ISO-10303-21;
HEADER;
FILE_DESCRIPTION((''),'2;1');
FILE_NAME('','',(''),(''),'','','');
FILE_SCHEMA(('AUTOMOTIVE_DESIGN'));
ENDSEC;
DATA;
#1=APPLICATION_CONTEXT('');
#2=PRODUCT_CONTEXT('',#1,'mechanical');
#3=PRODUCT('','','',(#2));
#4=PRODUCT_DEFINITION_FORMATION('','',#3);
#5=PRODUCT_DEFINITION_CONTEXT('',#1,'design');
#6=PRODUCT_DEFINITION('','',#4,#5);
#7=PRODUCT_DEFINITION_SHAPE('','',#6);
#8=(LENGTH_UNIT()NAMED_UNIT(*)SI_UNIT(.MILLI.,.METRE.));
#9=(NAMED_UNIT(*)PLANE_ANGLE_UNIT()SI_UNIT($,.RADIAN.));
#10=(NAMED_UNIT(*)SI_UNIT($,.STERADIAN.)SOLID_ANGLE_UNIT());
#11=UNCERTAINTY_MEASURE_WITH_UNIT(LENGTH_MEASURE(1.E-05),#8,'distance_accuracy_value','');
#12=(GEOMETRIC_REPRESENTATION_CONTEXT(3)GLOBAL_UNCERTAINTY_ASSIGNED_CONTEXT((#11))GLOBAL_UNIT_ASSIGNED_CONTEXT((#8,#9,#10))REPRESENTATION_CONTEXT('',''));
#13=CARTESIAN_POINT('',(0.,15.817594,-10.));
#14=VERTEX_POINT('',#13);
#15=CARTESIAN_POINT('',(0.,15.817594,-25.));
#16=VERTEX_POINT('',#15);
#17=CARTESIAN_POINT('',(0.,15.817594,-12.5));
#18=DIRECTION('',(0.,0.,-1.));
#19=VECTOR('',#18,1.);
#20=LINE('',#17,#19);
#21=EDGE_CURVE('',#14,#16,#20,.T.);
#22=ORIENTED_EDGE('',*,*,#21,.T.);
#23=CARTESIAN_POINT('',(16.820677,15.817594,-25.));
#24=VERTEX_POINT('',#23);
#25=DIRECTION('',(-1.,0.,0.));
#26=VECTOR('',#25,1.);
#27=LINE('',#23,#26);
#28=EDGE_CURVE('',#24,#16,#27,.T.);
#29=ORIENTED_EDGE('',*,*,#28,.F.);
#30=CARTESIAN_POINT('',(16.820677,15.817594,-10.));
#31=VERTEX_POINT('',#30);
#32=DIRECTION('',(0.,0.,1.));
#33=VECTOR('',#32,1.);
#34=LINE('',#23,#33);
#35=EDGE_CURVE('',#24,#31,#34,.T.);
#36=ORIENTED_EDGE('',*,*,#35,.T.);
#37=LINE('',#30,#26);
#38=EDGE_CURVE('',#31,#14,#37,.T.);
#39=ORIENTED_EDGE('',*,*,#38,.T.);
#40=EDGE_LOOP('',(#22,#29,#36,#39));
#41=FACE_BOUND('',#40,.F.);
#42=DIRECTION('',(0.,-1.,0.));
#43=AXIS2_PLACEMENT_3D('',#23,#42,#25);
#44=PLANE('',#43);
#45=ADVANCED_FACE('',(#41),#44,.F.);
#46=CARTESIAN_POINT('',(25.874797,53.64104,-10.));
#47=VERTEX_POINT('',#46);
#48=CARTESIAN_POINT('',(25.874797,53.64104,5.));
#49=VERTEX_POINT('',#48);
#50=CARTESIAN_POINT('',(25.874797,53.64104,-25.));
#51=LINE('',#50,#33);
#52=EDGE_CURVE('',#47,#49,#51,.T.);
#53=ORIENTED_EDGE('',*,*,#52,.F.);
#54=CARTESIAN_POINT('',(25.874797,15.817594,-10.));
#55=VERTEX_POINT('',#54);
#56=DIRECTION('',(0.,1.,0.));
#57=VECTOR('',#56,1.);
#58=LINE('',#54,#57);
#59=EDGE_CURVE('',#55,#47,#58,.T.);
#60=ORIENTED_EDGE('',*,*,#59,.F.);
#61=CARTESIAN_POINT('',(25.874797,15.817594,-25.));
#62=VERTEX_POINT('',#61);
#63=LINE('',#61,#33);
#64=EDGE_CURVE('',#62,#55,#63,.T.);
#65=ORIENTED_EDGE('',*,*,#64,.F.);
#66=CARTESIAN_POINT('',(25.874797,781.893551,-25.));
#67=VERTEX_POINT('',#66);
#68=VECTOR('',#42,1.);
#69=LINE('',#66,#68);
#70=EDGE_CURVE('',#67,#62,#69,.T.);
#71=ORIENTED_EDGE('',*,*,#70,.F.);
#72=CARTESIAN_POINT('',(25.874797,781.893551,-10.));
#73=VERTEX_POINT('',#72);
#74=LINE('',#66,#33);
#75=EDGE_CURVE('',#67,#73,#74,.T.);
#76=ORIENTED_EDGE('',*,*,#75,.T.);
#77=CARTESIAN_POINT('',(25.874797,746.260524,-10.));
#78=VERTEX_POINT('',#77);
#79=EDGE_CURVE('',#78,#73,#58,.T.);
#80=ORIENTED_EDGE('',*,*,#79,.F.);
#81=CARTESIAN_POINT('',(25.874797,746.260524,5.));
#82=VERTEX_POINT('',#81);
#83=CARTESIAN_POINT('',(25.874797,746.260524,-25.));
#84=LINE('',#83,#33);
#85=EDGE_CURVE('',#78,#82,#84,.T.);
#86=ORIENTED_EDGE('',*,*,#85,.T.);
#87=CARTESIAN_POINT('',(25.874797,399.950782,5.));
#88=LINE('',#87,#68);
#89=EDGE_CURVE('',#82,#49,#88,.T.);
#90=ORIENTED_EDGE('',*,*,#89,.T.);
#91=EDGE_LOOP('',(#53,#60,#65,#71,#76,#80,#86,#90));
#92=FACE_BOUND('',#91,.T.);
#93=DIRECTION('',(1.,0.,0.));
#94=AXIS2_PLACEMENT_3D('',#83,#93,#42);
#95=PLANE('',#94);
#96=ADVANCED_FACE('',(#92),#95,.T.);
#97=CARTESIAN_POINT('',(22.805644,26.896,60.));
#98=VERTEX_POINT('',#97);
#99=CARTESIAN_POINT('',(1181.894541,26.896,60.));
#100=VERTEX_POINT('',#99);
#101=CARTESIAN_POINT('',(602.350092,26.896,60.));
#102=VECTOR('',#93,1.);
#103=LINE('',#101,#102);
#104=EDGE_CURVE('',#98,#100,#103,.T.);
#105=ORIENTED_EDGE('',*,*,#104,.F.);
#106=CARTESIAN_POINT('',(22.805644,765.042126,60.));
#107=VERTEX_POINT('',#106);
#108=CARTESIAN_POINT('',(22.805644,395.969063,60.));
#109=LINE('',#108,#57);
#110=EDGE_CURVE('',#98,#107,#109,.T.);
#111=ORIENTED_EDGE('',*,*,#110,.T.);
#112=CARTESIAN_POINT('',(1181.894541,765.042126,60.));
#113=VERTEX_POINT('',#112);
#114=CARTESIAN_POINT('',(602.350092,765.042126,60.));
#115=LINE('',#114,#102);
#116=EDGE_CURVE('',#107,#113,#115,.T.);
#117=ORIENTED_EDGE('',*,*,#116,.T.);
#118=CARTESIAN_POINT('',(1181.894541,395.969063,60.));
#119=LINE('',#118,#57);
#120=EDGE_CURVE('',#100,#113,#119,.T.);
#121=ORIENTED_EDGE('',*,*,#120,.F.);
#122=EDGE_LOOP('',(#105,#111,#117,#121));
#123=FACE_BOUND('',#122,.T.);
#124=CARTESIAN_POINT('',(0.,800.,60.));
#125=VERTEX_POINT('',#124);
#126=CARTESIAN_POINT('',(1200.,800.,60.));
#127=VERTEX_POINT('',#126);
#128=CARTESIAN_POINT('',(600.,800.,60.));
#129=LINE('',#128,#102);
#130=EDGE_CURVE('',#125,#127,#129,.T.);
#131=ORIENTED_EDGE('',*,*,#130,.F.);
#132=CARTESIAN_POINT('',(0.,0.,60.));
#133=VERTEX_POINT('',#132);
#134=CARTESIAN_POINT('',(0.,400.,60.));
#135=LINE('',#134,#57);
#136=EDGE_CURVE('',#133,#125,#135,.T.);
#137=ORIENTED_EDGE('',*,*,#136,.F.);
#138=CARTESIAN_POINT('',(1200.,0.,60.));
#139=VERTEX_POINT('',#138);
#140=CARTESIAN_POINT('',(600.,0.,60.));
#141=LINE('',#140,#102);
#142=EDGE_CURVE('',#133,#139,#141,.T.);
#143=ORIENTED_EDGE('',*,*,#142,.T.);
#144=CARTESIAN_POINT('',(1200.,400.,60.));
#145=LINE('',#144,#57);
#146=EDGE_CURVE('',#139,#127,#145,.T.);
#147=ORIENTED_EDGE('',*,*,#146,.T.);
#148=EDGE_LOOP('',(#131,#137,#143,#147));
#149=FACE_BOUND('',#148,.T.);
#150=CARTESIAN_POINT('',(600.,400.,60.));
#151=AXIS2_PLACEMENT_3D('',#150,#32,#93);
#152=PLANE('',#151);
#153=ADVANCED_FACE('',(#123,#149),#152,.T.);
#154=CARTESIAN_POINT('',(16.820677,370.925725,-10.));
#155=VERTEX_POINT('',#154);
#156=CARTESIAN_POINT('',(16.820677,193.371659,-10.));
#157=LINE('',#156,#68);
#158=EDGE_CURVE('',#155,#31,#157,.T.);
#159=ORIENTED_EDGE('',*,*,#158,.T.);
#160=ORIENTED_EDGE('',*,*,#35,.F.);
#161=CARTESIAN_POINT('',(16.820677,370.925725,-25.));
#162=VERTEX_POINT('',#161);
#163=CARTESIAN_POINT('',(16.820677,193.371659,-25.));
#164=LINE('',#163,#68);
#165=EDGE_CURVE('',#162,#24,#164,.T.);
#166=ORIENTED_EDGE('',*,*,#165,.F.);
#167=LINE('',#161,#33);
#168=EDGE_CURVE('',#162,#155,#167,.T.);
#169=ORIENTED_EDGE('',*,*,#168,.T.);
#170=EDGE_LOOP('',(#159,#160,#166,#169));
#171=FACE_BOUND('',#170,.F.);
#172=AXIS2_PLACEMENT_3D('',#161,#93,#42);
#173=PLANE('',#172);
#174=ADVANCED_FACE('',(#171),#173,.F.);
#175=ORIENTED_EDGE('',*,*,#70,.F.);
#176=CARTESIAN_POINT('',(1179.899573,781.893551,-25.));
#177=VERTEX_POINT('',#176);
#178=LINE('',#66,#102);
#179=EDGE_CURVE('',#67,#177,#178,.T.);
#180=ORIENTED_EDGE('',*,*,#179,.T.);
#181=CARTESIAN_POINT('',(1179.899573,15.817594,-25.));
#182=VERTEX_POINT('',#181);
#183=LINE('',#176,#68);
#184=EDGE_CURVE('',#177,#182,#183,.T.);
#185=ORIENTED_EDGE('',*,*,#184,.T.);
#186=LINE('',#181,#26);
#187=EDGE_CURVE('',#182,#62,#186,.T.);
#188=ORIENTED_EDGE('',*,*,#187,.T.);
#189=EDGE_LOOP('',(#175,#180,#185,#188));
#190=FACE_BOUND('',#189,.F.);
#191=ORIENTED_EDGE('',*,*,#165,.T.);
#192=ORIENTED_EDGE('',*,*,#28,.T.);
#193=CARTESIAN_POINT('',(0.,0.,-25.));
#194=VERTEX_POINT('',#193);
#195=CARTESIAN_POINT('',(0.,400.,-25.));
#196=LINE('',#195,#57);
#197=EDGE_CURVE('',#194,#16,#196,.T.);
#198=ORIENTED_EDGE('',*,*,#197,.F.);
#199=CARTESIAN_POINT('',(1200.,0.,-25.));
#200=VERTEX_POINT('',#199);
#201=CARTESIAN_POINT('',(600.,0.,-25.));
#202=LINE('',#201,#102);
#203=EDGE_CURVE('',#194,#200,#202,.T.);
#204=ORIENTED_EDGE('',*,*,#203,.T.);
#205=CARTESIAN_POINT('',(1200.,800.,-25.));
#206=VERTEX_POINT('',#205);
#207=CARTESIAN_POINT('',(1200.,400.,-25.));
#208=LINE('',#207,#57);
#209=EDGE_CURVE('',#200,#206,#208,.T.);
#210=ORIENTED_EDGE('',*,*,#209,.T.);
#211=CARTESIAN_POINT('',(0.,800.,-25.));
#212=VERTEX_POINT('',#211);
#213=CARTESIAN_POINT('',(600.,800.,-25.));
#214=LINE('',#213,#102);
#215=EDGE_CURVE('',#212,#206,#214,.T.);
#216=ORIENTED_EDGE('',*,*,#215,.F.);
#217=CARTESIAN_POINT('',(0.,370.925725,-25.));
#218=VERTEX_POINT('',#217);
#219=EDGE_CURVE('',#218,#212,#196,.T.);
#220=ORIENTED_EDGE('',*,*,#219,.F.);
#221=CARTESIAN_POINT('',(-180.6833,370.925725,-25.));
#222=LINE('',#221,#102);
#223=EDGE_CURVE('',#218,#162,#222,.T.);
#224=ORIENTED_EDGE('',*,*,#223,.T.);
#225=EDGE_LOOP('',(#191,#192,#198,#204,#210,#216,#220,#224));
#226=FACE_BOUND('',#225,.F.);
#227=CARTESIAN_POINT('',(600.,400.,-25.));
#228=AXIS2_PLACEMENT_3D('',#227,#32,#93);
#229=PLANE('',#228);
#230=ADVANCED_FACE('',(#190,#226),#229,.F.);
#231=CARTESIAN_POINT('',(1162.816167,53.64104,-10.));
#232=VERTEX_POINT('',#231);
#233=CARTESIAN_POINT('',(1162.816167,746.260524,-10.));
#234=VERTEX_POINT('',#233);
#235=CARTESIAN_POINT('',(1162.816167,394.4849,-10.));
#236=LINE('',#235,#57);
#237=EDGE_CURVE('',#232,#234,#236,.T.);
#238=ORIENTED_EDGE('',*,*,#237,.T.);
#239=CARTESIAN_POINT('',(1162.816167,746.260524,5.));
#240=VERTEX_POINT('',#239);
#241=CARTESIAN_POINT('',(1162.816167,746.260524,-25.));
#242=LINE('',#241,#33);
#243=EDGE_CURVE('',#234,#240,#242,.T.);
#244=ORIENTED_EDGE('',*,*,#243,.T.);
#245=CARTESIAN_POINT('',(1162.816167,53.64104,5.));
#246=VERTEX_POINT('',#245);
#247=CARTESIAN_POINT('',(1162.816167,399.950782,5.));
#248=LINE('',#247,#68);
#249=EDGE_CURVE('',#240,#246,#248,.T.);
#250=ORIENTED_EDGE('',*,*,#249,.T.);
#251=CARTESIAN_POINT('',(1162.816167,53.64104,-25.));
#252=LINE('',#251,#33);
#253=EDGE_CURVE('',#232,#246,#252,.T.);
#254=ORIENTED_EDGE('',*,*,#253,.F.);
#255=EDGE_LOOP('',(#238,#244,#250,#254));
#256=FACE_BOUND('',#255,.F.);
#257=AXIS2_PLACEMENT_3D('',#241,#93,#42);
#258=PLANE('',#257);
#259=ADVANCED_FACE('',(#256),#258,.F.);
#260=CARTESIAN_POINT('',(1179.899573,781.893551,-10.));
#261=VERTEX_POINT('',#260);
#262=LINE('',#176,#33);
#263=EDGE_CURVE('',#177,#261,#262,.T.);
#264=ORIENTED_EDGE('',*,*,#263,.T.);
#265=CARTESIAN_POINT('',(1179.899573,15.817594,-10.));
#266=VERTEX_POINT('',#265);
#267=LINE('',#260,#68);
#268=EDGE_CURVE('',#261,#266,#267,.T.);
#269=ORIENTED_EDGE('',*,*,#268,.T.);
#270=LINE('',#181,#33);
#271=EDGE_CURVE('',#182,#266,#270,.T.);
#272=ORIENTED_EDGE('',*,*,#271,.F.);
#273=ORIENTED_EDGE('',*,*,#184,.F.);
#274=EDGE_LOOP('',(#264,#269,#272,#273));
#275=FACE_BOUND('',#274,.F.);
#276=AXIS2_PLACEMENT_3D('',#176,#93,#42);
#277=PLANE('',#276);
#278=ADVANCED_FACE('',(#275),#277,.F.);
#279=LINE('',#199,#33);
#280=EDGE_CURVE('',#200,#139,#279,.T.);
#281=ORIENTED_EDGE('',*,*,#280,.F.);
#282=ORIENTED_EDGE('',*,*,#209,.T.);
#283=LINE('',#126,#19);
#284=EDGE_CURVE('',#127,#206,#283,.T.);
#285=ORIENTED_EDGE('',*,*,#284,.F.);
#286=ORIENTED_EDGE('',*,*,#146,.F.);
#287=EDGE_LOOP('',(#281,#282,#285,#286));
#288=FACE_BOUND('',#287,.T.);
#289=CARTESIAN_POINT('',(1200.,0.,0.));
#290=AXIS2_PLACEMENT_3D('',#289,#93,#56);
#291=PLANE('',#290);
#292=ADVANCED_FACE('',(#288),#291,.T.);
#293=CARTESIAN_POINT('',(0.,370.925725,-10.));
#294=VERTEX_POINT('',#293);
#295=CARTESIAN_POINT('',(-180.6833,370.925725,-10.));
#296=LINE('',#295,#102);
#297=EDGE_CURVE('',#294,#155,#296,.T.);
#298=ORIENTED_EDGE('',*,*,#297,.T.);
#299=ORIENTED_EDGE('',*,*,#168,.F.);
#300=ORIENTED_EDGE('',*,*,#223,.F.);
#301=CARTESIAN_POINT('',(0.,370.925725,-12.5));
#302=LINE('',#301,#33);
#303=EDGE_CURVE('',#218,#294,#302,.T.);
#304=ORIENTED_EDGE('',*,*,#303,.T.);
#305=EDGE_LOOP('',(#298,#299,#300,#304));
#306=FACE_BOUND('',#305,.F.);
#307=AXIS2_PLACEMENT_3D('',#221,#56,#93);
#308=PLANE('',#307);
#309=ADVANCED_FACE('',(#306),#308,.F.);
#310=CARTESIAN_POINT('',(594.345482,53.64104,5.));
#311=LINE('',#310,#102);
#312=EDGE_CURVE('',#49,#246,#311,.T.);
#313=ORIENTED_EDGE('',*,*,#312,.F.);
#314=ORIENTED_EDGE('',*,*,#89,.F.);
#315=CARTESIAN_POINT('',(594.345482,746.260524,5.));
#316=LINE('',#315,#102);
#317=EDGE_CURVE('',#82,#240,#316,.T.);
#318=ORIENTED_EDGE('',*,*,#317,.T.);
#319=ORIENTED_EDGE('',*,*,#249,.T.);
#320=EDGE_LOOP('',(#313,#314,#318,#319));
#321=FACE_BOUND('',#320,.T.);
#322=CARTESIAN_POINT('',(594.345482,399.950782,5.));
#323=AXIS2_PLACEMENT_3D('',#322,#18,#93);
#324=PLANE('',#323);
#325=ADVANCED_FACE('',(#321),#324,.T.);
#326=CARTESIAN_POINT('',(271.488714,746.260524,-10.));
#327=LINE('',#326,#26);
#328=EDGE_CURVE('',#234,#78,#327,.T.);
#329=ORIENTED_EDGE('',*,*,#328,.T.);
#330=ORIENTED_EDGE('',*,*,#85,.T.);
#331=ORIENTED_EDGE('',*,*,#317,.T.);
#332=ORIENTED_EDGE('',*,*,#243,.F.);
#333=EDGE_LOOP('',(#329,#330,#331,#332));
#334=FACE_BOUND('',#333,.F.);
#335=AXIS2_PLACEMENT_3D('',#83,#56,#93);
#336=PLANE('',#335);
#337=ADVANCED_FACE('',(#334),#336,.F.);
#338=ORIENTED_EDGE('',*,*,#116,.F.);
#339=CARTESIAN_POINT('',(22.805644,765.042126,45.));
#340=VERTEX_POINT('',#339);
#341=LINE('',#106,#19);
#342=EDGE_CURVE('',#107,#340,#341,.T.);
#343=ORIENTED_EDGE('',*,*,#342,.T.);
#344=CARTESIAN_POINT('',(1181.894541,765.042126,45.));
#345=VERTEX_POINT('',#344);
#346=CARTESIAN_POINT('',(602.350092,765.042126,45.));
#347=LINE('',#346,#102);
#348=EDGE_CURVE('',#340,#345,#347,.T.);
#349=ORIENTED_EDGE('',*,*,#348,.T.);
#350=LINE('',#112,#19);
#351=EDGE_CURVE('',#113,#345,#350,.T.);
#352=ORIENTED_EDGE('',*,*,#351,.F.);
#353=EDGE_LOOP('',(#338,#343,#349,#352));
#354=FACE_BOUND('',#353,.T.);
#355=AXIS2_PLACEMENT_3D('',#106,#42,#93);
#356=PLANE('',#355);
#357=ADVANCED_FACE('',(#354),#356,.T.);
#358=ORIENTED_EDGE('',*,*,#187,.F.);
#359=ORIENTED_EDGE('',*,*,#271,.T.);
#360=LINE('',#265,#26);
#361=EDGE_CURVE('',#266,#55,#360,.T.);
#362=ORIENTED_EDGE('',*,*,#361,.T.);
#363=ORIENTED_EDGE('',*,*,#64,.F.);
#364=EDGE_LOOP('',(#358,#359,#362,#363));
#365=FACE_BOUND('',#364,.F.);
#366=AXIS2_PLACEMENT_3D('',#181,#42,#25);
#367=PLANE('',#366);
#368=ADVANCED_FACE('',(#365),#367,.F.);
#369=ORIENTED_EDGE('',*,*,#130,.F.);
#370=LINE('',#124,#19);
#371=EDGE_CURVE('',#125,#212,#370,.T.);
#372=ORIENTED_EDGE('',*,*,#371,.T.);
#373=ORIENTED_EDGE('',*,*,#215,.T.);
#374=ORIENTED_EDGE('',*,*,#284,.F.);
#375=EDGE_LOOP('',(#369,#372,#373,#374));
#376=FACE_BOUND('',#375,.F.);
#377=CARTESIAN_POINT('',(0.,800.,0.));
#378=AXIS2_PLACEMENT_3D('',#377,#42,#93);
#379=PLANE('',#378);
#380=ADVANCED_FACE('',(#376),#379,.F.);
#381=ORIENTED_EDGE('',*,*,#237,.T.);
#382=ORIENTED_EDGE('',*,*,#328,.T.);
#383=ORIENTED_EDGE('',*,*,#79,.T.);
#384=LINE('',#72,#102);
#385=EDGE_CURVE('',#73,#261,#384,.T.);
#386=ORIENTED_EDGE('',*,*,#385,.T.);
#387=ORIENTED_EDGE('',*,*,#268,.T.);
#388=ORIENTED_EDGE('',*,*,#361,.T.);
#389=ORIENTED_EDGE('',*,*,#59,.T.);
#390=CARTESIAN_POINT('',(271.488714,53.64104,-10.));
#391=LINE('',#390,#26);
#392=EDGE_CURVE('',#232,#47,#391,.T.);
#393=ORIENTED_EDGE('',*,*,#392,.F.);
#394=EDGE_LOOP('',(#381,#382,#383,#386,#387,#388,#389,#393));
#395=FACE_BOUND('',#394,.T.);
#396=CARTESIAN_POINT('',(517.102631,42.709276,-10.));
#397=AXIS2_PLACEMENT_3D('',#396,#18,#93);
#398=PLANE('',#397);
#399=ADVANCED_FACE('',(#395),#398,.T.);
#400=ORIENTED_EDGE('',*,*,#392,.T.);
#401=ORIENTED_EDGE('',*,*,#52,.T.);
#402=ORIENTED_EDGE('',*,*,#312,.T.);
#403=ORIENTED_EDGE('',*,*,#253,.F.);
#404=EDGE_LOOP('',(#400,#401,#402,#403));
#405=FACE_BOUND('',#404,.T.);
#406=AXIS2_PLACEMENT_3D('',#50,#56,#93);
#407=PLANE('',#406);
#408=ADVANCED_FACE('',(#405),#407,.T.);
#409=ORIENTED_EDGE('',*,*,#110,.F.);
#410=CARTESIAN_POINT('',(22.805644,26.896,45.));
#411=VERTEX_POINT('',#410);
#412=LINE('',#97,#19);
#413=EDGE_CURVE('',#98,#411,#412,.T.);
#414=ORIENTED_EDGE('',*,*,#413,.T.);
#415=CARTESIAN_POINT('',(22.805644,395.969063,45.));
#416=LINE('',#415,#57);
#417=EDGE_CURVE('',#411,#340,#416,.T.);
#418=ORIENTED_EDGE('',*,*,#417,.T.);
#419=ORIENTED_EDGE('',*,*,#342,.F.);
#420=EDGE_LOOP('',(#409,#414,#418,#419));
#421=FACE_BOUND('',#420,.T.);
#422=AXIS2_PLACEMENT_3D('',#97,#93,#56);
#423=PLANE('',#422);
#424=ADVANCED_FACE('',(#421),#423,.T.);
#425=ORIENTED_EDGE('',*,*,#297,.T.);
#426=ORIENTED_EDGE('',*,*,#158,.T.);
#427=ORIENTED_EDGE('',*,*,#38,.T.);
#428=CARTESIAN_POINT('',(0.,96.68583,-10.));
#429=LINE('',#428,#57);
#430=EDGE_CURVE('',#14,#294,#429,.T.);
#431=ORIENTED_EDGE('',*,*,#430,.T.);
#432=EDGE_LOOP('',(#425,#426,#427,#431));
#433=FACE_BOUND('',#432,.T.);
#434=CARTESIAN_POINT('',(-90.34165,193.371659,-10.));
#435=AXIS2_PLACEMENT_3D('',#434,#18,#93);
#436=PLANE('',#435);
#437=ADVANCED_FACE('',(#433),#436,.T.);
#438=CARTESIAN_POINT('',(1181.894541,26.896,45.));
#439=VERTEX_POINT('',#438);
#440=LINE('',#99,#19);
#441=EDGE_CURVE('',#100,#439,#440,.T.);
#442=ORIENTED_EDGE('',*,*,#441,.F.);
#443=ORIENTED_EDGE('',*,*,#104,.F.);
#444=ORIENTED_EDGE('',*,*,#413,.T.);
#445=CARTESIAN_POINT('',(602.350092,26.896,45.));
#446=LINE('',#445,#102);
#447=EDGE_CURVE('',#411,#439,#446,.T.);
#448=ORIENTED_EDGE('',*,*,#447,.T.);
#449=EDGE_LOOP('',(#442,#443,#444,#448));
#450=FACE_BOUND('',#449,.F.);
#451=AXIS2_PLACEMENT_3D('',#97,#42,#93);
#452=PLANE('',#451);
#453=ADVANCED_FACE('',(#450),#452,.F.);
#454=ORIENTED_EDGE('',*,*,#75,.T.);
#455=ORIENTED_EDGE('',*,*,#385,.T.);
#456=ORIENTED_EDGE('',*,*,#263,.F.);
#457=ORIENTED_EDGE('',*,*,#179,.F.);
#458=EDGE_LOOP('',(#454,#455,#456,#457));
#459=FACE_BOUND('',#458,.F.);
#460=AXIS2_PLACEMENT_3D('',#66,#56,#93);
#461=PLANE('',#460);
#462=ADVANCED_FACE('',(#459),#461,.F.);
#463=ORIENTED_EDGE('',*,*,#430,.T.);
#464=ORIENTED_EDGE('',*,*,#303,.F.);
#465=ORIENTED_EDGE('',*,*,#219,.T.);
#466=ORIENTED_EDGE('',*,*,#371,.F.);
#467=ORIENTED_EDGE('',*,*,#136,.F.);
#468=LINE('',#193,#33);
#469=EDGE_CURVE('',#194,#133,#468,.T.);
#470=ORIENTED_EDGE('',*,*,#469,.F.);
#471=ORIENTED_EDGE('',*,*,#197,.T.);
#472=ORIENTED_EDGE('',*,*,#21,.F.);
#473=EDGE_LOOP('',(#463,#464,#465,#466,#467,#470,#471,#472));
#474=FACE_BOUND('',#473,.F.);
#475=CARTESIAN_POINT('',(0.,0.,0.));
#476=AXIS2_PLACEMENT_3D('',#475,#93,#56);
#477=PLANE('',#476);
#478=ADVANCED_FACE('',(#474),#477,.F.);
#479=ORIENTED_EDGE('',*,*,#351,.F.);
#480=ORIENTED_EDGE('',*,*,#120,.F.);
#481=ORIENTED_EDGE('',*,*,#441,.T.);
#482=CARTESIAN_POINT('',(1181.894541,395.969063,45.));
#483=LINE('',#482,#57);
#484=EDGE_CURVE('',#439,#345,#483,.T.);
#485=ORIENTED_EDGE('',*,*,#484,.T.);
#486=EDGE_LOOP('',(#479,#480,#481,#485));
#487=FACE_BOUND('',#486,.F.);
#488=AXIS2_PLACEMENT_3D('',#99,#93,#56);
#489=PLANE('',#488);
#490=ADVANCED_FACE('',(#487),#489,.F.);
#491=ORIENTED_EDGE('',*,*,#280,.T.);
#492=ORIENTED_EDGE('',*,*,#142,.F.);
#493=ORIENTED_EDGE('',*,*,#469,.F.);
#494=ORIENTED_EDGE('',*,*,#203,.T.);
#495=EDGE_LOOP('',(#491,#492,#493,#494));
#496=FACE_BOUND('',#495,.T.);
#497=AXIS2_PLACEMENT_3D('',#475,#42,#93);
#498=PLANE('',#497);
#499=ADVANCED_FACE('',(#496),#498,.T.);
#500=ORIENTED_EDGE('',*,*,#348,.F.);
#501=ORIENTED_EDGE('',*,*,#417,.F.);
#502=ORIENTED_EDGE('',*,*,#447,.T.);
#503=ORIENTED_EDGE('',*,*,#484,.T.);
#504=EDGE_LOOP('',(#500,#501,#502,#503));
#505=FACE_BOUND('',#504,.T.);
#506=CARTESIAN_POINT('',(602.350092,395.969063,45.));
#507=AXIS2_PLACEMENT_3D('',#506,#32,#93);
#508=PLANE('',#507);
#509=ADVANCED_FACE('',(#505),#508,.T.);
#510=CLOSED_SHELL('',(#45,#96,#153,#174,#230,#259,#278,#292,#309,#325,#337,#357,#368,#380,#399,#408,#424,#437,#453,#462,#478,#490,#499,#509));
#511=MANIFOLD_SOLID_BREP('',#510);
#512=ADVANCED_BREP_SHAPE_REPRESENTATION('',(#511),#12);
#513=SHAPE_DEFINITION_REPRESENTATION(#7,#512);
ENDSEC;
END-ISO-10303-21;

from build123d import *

# Parameters (mm, degrees)
F0_W      = 1200
F0_H      = 800
F1_DEPTH  = 60
F4_DEPTH  = 25
F5_W      = 1136.9413696229
F5_H      = 692.619483918
F6_DEPTH  = 30
F7_W      = 1159.0888965875
F7_H      = 738.1461262703
F8_DEPTH  = 15
F9_W      = 180.6832998991
F9_H      = 355.1081307232
F9_W_2    = 16.8206766248
F9_W_3    = 982.4556671083
F9_H_2    = 21.863527596
F9_H_3    = 568.6533860862
F10_DEPTH = 15


# Not quite as in the source:
# - the program builds the solid bodies; features that only make, move or delete a surface that nothing else refers to are left out


with BuildPart() as f1:
    # F0 (on Top) → F1 (new body)
    with BuildSketch(Plane.XY):
        with Locations((600, 400)):
            Rectangle(F0_W, F0_H)
    extrude(amount=F1_DEPTH)

    # F4 (add): a face of the model
    f4_faces = [f1.faces().sort_by_distance(p)[0] for p in [
        (600, 400, 0),
    ]]
    extrude(f4_faces, amount=F4_DEPTH)

    # F5 (on face) → F6 (cut)
    with BuildSketch(Plane(origin=(0, 0, -25), x_dir=(1, 0, 0), z_dir=(0, 0, -1))):
        with Locations((594.3454820663, -399.9507818371)):
            Rectangle(F5_W, F5_H)
    extrude(amount=-F6_DEPTH, mode=Mode.SUBTRACT)

    # F7 (on face) → F8 (cut)
    with BuildSketch(Plane.XY.offset(60)):
        with Locations((602.350092493, 395.9690630436)):
            Rectangle(F7_W, F7_H)
    extrude(amount=-F8_DEPTH, mode=Mode.SUBTRACT)

    # F9 (on face) → F10 (cut)
    with BuildSketch(Plane(origin=(0, 0, -25), x_dir=(1, 0, 0), z_dir=(0, 0, -1))):
        with Locations((-90.3416499496, -193.3716591448)):
            Rectangle(F9_W, F9_H)
        with Locations((8.4103383124, -193.3716591448)):
            Rectangle(F9_W_2, F9_H)
        with Locations((517.1026308089, -42.7092760801)):
            Rectangle(F9_W_3, F9_H_2)
        Polygon((1162.8161668777, -53.6410398781), (1008.3304643631, -53.6410398781), (1008.3304643631, -622.2944259644), (25.8747972548, -622.2944259644), (25.8747972548, -746.2605237961), (1162.8161668777, -746.2605237961), align=None)
        with Locations((517.1026308089, -337.9677329212)):
            Rectangle(F9_W_3, F9_H_3)
        Polygon((25.8747972548, -15.8175937831), (25.8747972548, -31.7775122821), (1008.3304643631, -31.7775122821), (1008.3304643631, -53.6410398781), (1162.8161668777, -53.6410398781), (1162.8161668777, -746.2605237961), (25.8747972548, -746.2605237961), (25.8747972548, -781.8935513496), (1179.8995733261, -781.8935513496), (1179.8995733261, -15.8175937831), align=None)
    extrude(amount=-F10_DEPTH, mode=Mode.SUBTRACT)


solid = f1.part
